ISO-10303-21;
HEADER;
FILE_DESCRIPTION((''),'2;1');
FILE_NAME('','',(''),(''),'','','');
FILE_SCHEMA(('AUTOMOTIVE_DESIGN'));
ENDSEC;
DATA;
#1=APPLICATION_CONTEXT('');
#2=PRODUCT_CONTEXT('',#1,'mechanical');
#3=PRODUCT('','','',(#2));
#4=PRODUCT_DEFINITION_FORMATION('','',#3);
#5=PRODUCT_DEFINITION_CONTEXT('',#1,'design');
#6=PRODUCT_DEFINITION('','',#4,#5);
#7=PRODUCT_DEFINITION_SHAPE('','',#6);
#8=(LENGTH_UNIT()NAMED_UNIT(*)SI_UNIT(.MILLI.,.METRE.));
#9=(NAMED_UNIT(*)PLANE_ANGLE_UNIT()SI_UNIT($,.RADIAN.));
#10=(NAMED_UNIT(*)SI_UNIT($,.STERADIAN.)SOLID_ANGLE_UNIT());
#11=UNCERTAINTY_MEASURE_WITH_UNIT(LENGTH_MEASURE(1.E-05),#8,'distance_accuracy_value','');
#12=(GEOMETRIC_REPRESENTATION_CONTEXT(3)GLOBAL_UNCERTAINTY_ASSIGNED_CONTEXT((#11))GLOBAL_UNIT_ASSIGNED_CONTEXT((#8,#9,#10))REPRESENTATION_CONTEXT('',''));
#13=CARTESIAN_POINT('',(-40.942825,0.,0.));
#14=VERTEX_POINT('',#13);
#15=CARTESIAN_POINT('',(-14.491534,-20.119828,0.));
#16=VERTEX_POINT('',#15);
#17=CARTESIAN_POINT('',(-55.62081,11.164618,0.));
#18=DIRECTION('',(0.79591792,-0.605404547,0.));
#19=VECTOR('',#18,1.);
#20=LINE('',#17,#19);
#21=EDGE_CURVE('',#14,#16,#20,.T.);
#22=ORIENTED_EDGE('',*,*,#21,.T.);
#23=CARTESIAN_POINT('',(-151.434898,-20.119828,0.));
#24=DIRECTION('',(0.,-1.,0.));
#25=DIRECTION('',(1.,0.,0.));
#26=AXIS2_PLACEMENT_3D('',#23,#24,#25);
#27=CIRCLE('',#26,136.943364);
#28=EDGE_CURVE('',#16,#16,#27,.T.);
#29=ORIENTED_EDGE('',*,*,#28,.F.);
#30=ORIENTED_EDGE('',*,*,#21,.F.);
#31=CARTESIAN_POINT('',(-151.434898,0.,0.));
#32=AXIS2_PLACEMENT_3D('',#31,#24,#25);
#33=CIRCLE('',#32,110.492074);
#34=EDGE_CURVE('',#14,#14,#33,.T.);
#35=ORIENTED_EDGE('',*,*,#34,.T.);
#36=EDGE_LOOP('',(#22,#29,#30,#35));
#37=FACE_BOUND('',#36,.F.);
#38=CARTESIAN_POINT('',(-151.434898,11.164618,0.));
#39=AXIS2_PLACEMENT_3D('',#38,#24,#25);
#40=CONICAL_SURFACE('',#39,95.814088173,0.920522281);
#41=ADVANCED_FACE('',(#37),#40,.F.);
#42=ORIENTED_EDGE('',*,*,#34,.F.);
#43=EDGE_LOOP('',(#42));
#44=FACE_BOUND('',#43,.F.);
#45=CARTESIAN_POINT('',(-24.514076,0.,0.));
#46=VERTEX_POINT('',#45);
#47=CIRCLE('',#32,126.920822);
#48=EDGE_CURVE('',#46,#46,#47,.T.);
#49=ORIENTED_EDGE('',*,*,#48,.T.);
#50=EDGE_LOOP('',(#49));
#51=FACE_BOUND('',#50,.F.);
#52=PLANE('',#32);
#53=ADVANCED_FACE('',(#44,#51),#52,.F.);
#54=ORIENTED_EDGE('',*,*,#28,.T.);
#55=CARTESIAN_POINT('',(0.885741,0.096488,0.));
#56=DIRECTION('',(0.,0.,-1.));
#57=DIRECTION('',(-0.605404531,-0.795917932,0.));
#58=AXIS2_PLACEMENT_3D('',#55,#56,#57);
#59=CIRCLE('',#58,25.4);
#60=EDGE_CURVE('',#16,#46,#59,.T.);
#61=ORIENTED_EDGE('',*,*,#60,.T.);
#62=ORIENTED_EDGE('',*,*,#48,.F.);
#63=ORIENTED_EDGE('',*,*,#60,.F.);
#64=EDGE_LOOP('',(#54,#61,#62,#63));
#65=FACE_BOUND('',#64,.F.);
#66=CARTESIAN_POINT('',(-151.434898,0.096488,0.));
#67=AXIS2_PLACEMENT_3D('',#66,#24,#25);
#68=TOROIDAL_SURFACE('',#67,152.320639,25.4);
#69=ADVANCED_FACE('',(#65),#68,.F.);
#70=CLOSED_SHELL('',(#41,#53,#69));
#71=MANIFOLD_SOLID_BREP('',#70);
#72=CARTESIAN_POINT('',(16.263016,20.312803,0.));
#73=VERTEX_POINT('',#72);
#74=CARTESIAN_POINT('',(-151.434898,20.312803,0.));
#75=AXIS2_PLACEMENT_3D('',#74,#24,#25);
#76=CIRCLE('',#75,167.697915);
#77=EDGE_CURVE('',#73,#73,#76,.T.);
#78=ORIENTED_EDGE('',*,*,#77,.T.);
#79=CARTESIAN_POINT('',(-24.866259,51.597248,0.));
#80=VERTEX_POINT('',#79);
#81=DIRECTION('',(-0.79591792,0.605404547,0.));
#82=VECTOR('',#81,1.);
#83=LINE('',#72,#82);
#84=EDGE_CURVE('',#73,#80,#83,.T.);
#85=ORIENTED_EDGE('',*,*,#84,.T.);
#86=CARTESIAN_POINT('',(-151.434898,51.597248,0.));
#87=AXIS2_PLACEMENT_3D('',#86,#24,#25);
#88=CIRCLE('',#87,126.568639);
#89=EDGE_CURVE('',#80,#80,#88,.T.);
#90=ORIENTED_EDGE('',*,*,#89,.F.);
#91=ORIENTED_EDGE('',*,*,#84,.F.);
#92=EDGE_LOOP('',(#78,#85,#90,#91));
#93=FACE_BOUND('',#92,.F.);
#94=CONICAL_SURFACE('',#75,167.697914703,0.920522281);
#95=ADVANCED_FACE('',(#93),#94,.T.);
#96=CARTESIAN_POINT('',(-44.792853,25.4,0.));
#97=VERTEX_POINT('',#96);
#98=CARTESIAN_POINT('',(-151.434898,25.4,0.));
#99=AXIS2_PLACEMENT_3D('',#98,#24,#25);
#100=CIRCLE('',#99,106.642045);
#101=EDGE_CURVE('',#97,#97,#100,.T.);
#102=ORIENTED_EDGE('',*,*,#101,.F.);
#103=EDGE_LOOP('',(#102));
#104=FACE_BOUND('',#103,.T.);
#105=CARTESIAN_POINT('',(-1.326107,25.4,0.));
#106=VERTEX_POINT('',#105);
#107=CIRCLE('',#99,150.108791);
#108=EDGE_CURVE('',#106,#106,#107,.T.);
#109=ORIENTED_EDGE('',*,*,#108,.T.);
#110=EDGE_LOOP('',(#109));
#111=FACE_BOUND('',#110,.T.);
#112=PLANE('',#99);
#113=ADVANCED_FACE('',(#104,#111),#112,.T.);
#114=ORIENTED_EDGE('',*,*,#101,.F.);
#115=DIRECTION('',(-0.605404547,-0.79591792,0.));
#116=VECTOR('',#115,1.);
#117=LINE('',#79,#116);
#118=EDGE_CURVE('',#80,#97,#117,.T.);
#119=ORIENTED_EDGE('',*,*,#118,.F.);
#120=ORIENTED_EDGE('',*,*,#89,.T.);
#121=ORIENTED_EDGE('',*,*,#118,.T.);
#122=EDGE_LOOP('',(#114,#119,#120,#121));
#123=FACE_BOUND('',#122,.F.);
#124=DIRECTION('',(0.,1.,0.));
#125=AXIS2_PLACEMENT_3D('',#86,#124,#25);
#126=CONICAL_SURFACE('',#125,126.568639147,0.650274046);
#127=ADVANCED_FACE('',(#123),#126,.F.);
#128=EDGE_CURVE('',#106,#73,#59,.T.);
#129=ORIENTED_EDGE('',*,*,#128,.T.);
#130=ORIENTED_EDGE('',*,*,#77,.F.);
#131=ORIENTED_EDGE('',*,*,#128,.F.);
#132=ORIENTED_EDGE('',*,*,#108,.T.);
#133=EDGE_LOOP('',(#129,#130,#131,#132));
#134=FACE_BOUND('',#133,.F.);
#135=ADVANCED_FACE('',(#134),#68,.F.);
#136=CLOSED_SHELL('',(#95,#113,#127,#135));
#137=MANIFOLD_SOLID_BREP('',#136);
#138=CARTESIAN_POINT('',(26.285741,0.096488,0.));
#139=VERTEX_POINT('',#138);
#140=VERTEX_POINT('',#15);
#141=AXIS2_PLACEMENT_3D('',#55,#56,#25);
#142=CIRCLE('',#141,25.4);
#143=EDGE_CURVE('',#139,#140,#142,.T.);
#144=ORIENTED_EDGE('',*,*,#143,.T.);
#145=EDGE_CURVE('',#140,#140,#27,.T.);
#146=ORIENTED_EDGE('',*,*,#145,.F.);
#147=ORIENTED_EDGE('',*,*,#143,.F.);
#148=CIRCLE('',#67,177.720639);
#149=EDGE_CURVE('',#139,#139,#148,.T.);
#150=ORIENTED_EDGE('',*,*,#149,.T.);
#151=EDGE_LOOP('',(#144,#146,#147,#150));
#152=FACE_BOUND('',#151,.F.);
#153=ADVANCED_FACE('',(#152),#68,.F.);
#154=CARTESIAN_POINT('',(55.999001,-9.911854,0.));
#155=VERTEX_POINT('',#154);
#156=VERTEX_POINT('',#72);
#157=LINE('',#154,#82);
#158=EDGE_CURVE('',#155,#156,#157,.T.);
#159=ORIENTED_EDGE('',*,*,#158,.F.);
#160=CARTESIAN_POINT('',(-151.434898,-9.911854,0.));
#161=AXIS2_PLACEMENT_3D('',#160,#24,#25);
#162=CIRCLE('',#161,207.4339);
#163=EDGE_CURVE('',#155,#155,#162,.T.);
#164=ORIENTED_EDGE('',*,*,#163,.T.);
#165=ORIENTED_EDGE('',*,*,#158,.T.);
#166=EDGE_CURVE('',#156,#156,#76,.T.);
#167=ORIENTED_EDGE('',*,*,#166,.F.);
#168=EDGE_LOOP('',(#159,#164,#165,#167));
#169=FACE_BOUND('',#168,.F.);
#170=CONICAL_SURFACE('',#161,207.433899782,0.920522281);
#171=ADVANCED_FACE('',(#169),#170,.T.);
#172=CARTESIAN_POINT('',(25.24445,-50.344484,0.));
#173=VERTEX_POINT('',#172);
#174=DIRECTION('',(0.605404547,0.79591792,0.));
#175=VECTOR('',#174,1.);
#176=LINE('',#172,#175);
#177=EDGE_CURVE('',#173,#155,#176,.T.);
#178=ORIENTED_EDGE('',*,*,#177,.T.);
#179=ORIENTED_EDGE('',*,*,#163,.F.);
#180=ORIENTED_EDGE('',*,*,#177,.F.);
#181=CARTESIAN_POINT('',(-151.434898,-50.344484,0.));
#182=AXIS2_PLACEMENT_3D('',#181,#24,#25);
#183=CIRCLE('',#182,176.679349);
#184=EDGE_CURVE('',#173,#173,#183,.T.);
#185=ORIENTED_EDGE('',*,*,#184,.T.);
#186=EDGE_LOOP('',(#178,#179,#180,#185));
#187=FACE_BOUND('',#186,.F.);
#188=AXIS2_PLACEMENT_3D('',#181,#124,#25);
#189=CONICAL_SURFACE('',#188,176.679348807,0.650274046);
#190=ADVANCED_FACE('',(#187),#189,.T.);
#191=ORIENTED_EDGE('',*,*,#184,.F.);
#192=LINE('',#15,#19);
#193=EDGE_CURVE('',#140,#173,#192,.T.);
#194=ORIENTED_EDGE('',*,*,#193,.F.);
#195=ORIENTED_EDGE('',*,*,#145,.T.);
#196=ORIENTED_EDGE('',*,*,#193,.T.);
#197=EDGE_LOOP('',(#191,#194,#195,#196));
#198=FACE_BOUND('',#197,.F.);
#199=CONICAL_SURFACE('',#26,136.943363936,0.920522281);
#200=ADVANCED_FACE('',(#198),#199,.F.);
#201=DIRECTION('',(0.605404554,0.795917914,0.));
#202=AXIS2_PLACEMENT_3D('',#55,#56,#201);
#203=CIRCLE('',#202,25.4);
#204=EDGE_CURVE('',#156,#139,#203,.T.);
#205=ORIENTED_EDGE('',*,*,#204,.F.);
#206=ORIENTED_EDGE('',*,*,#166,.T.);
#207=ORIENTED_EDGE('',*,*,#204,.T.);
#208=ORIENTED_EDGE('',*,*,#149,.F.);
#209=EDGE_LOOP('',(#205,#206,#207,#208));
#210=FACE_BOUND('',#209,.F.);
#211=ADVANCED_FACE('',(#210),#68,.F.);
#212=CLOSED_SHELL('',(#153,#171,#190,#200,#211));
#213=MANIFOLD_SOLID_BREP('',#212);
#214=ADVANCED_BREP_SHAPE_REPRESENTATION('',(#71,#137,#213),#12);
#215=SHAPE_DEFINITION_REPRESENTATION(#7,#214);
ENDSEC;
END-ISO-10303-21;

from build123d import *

# Parameters (mm, degrees)
F1_R     = 151.4348983765
F3_DEPTH = 25.4


# Not quite as in the source:
# - a feature of the source that left no trace in its solid (it failed there, or was rolled back) is left out


with BuildPart() as f2:
    # F0 (on Top) → F2 (revolve)
    with BuildSketch(Plane.XY):
        with BuildLine():
            Line((-14.491534441, -20.1198276415), (25.2444504306, -50.344484377))
            Line((25.2444504306, -50.344484377), (55.999001405, -9.9118540599))
            Line((55.999001405, -9.9118540599), (16.2630163267, 20.3128028329))
            ThreePointArc((16.2630163267, 20.3128028329), (23.6425286685, 11.3787127289), (26.2857406446, 0.0964878225))
            ThreePointArc((26.2857406446, 0.0964878225), (12.1679658867, -22.6603000349), (-14.491534441, -20.1198276415))
        make_face()
    revolve(axis=Axis((-151.4348983765, 0, 0), (0, -1, 0)))


with BuildPart() as f2b:
    # F0 (on Top) → F2, piece 2 (revolve)
    with BuildSketch(Plane.XY):
        with BuildLine():
            Line((-55.6208102037, 11.1646175717), (-14.491534441, -20.1198276415))
            ThreePointArc((-14.491534441, -20.1198276415), (-19.3305745926, 15.4737632063), (16.2630163267, 20.3128028329))
            Line((16.2630163267, 20.3128028329), (-24.8662592294, 51.5972478889))
            Line((-24.8662592294, 51.5972478889), (-55.6208102037, 11.1646175717))
        make_face()
    revolve(axis=Axis((-151.4348983765, 0, 0), (0, -1, 0)))

    # F1 (on Front) → F3 (cut)
    with BuildSketch(Plane.XZ):
        with Locations((-151.4348983765, 0)):
            Circle(F1_R)
    extrude(amount=-F3_DEPTH, mode=Mode.SUBTRACT)


solid = Compound([f2.part, f2b.part])
